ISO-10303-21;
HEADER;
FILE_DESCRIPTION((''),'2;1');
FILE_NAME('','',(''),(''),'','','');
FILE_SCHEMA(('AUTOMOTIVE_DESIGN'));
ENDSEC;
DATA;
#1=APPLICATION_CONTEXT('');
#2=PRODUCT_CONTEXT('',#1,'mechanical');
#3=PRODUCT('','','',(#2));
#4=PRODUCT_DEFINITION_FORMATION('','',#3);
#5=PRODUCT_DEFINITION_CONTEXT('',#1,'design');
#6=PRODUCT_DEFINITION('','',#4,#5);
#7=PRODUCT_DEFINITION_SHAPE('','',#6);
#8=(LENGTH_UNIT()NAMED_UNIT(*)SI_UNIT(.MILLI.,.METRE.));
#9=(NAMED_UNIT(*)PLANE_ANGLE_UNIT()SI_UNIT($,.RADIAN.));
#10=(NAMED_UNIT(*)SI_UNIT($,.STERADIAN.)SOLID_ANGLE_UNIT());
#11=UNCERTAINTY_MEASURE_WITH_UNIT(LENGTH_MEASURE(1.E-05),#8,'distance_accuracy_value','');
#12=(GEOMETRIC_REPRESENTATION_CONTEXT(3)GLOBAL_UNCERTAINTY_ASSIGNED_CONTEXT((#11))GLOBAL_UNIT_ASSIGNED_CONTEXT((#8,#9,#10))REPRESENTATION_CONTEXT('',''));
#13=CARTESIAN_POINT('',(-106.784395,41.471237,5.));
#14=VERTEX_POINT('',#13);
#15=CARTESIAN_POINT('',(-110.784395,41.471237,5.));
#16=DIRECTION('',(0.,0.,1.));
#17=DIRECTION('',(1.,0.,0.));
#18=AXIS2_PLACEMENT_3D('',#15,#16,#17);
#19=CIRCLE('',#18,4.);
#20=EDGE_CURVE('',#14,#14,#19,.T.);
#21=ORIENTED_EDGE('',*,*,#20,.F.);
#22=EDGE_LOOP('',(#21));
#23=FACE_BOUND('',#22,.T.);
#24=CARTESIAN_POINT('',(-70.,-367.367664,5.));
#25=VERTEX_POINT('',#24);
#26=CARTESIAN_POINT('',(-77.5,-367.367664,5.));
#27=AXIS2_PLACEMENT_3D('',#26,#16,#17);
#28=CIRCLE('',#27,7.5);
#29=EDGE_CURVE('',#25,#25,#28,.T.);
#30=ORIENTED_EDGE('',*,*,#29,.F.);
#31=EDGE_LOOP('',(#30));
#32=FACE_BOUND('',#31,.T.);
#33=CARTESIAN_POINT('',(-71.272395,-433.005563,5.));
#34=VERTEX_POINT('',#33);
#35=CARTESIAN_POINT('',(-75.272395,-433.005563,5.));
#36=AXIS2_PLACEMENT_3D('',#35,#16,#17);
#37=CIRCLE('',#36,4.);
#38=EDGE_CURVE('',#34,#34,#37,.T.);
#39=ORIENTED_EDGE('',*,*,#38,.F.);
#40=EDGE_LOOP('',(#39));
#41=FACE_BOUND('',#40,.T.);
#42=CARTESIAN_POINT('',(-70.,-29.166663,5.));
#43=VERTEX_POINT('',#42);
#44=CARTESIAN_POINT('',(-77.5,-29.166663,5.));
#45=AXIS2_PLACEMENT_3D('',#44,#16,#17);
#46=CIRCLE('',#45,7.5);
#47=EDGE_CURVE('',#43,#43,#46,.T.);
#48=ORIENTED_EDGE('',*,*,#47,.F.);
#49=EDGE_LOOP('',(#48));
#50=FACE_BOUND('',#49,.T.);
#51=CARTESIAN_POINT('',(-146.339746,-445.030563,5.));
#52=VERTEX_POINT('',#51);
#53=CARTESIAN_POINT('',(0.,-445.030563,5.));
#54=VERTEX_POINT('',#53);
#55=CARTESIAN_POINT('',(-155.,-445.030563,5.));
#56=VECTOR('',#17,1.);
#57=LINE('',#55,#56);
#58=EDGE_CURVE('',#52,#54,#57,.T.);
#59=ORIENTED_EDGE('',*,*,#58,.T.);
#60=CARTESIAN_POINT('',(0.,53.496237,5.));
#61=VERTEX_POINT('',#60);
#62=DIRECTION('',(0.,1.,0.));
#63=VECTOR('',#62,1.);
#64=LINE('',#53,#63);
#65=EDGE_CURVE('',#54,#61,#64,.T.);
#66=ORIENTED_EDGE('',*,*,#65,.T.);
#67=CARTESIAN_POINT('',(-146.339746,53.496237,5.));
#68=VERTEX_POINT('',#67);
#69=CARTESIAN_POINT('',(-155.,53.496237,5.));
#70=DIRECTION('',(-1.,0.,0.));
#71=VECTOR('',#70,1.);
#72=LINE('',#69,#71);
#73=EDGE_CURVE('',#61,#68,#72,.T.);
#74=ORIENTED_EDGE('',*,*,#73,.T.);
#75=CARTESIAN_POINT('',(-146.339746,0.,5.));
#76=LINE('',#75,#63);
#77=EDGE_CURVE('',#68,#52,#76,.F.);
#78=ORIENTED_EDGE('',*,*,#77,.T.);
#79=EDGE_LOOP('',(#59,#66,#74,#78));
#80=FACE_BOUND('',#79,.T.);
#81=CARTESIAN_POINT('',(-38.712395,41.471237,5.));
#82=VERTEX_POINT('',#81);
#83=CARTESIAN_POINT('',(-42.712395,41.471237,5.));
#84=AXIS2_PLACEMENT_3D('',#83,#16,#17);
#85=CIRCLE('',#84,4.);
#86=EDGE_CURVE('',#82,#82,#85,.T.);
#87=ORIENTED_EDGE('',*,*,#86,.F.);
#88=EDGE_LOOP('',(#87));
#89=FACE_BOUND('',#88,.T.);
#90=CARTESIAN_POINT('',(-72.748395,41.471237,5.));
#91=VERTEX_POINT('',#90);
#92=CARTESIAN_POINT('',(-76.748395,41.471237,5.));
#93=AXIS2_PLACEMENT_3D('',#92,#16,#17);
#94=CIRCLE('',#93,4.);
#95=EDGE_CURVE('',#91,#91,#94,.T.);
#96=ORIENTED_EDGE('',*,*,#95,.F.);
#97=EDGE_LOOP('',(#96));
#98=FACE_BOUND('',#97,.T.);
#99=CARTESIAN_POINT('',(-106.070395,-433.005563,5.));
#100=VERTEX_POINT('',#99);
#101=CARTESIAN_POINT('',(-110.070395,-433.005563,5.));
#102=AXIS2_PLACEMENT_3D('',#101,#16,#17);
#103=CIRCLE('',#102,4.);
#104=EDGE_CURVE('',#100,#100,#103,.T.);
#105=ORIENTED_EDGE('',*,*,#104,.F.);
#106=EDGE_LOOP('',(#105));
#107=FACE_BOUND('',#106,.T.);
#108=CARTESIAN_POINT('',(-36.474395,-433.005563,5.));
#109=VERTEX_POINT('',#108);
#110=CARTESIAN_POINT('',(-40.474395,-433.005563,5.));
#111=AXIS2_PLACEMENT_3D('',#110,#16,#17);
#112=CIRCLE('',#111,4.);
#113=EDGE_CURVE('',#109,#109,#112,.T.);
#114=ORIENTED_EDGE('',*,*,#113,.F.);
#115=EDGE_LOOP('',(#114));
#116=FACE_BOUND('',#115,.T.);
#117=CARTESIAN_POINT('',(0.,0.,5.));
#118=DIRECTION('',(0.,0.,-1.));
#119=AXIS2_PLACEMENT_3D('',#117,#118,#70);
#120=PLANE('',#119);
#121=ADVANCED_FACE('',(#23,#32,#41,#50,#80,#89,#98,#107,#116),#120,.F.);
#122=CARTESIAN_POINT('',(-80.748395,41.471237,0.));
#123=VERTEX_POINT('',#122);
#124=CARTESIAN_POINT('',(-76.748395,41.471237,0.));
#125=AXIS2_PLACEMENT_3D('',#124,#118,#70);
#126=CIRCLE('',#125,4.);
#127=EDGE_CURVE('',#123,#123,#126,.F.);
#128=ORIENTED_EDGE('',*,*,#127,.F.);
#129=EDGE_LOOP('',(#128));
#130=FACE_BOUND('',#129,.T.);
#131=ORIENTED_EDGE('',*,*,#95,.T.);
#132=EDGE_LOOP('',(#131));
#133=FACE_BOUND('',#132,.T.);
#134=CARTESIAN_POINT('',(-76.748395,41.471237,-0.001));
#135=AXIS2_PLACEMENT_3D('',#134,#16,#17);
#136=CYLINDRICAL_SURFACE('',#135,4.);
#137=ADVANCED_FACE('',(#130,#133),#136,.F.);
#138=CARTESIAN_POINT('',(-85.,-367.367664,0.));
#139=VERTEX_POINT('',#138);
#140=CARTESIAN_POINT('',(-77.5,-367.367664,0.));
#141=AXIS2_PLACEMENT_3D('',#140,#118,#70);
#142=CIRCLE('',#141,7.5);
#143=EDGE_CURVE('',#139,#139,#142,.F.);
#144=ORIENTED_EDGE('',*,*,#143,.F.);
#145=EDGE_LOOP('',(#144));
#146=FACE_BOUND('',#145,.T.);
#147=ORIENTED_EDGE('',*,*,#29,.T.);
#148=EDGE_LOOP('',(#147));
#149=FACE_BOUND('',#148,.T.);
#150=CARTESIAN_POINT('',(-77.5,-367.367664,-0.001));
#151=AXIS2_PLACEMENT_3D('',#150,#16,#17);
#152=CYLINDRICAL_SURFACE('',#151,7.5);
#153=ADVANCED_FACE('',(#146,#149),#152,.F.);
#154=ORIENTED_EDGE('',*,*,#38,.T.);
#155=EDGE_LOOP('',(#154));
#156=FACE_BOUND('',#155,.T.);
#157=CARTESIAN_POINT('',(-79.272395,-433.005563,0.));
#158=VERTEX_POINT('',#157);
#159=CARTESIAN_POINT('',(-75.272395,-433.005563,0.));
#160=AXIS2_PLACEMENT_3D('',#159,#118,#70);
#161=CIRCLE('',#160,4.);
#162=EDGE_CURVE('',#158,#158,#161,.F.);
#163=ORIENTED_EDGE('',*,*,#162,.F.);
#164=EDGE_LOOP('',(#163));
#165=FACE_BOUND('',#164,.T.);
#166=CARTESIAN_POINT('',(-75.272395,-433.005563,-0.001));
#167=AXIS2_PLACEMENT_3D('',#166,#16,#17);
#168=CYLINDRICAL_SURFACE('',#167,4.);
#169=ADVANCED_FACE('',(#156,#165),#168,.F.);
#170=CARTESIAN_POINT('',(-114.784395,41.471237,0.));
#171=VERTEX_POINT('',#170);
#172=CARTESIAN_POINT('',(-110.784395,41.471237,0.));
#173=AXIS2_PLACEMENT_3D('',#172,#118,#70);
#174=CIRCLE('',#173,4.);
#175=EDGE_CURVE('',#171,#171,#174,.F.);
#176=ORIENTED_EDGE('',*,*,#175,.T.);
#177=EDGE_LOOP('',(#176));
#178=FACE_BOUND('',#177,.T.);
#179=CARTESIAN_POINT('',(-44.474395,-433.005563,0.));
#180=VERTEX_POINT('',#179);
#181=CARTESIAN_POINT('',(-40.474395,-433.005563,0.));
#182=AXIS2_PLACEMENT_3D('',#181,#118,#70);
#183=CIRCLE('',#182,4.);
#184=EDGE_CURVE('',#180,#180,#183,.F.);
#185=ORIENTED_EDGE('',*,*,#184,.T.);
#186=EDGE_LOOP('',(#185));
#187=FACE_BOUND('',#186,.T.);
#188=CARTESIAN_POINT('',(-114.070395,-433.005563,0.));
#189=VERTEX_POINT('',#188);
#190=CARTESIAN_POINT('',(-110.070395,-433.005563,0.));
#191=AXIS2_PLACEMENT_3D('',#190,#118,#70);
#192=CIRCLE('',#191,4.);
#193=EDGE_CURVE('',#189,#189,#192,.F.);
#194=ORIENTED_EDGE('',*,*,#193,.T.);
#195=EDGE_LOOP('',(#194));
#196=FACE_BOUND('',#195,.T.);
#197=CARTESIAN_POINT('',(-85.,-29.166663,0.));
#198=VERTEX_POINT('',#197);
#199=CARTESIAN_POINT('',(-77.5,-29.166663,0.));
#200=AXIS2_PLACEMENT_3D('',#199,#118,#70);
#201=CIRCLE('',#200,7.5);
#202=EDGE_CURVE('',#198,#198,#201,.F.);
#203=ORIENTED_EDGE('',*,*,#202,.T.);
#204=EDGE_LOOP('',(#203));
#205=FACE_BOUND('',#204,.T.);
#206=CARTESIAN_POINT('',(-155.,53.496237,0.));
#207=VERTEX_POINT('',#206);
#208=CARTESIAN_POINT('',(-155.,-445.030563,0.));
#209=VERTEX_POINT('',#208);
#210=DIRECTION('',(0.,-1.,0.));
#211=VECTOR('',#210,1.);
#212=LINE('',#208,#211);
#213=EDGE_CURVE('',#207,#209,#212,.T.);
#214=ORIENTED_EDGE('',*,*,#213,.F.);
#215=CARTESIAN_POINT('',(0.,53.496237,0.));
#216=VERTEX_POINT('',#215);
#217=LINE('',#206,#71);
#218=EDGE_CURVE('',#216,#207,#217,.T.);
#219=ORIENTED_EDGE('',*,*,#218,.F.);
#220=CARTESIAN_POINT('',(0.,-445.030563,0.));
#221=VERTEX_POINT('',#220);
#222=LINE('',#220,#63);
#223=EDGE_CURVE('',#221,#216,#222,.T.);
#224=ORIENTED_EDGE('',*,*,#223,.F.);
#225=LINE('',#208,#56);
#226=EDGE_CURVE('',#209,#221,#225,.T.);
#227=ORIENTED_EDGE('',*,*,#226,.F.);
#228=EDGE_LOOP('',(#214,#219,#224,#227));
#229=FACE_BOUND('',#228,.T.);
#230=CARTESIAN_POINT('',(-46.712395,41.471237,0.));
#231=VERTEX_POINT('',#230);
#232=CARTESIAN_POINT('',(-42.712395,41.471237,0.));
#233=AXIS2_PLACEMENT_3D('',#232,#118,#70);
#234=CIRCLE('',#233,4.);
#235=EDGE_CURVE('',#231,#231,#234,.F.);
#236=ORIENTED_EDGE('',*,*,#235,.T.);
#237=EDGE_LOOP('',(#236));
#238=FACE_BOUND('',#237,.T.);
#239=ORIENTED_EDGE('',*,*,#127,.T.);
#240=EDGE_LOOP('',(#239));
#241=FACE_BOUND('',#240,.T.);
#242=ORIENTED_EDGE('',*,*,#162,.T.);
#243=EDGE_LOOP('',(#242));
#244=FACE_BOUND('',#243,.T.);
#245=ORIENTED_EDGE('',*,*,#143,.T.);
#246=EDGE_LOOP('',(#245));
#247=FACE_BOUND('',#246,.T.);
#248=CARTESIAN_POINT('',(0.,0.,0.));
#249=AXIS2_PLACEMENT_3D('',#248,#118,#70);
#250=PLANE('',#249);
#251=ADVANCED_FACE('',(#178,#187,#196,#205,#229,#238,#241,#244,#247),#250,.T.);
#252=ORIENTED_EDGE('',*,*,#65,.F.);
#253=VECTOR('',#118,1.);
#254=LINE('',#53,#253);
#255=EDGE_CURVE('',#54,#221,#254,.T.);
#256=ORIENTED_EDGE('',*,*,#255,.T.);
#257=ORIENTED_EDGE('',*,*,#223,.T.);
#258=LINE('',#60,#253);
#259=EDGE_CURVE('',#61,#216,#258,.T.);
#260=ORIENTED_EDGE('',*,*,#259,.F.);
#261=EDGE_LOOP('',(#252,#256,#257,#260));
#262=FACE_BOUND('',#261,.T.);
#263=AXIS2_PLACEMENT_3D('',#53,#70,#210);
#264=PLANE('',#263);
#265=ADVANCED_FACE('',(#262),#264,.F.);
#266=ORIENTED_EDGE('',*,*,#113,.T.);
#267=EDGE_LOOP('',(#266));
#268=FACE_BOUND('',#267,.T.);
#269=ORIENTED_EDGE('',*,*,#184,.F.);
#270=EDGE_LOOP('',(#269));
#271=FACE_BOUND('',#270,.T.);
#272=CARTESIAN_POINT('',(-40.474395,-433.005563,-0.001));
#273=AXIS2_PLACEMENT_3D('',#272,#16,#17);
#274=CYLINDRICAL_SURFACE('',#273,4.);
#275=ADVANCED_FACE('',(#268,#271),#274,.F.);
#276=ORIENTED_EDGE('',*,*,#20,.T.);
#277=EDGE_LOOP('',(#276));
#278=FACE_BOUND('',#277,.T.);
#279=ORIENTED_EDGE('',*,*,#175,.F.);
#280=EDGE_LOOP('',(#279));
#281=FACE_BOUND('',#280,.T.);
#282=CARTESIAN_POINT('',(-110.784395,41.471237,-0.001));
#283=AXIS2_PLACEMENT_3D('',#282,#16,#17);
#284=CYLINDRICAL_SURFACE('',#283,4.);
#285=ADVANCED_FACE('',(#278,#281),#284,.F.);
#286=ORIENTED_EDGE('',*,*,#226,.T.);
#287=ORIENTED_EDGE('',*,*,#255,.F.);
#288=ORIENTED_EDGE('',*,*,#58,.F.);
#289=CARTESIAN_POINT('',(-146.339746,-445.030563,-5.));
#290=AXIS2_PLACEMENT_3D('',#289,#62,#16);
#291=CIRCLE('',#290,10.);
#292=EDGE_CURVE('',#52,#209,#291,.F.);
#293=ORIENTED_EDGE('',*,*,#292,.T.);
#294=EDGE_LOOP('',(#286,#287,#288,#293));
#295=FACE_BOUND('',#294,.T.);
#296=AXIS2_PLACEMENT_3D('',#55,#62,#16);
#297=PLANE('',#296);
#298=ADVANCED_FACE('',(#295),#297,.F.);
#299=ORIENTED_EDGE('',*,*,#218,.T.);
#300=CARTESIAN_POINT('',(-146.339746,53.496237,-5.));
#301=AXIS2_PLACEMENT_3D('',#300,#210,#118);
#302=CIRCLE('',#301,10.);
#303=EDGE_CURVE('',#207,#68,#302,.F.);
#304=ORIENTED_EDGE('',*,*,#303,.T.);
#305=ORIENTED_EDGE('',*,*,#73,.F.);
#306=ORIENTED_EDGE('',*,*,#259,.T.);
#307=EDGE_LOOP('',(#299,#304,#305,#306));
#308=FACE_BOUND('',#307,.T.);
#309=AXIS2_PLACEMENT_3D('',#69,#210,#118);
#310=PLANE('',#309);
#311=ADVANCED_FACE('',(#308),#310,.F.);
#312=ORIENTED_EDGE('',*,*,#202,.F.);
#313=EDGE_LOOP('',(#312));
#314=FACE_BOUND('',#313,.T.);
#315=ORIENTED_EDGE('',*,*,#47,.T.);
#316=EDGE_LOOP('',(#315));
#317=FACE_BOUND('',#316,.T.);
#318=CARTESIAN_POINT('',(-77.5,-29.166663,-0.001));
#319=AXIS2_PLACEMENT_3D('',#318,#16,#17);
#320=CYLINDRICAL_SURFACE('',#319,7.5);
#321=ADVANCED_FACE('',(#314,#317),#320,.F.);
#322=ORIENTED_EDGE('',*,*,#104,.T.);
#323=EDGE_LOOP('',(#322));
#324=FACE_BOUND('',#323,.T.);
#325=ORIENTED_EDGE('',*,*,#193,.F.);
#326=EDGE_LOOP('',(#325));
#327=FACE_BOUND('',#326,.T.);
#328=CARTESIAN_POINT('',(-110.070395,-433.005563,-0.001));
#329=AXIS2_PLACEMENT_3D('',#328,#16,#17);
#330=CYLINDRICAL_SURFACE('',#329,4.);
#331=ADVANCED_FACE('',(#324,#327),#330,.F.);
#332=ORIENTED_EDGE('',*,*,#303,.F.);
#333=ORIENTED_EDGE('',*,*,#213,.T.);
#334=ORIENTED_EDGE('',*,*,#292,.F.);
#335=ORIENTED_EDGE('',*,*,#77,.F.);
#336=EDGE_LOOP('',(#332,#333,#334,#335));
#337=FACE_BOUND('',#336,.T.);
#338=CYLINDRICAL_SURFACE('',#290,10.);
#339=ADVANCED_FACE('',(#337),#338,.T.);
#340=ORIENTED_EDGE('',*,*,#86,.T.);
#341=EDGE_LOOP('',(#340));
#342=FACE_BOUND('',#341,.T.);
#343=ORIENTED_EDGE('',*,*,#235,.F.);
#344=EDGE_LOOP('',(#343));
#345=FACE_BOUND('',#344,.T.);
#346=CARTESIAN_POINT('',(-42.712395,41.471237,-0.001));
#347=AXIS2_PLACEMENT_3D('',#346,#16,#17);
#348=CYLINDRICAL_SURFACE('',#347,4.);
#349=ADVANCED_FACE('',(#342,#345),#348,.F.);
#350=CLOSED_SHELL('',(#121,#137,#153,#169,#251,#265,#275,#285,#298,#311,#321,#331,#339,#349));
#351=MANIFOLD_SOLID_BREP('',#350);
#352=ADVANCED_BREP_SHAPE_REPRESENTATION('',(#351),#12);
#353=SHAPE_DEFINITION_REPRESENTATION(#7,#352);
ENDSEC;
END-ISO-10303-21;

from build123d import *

# Parameters (mm, degrees)
SKETCH1_W          = 155
SKETCH1_H          = 498.5268
BASE_FLANGE1_DEPTH = 5
CUT_EXTRUDE2_REACH = 473.277
SKETCH6_R          = 7.5
CUT_EXTRUDE3_REACH = 473.277
SKETCH7_R          = 4
FILLET1_R          = 10


# Sheet-metal steps are written as plain solids
with BuildPart() as part:
    # Sketch1 → Base-Flange1 (new body)
    with BuildSketch(Plane.XY):
        with Locations((-77.5, -195.767163373)):
            Rectangle(SKETCH1_W, SKETCH1_H)
    extrude(amount=BASE_FLANGE1_DEPTH)

    # Sketch6 → Cut-Extrude2 (cut, up to next)
    with BuildSketch(Plane.XY.offset(5), mode=Mode.PRIVATE) as cut_extrude2_sk1:
        with Locations((-77.5, -367.367664241)):
            Circle(SKETCH6_R)
    cut_extrude2_tool1 = extrude(cut_extrude2_sk1.sketch, amount=-CUT_EXTRUDE2_REACH, mode=Mode.PRIVATE) & part.part
    # Sketch6 → Cut-Extrude2 (cut, up to next)
    with BuildSketch(Plane.XY.offset(5), mode=Mode.PRIVATE) as cut_extrude2_sk2:
        with Locations((-77.5, -29.166662504)):
            Circle(SKETCH6_R)
    cut_extrude2_tool2 = extrude(cut_extrude2_sk2.sketch, amount=-CUT_EXTRUDE2_REACH, mode=Mode.PRIVATE) & part.part
    add(cut_extrude2_tool1.solids().sort_by_distance((-77.5, -367.367664, 5))[0], mode=Mode.SUBTRACT)
    add(cut_extrude2_tool2.solids().sort_by_distance((-77.5, -29.166663, 5))[0], mode=Mode.SUBTRACT)

    # Sketch7 → Cut-Extrude3 (cut, up to next)
    with BuildSketch(Plane.XY.offset(5), mode=Mode.PRIVATE) as cut_extrude3_sk1:
        with Locations((-110.070394878, -433.005563373)):
            Circle(SKETCH7_R)
    cut_extrude3_tool1 = extrude(cut_extrude3_sk1.sketch, amount=-CUT_EXTRUDE3_REACH, mode=Mode.PRIVATE) & part.part
    # Sketch7 → Cut-Extrude3 (cut, up to next)
    with BuildSketch(Plane.XY.offset(5), mode=Mode.PRIVATE) as cut_extrude3_sk2:
        with Locations((-75.272394878, -433.005563373)):
            Circle(SKETCH7_R)
    cut_extrude3_tool2 = extrude(cut_extrude3_sk2.sketch, amount=-CUT_EXTRUDE3_REACH, mode=Mode.PRIVATE) & part.part
    # Sketch7 → Cut-Extrude3 (cut, up to next)
    with BuildSketch(Plane.XY.offset(5), mode=Mode.PRIVATE) as cut_extrude3_sk3:
        with Locations((-40.474394878, -433.005563373)):
            Circle(SKETCH7_R)
    cut_extrude3_tool3 = extrude(cut_extrude3_sk3.sketch, amount=-CUT_EXTRUDE3_REACH, mode=Mode.PRIVATE) & part.part
    # Sketch7 → Cut-Extrude3 (cut, up to next)
    with BuildSketch(Plane.XY.offset(5), mode=Mode.PRIVATE) as cut_extrude3_sk4:
        with Locations((-42.712394878, 41.471236627)):
            Circle(SKETCH7_R)
    cut_extrude3_tool4 = extrude(cut_extrude3_sk4.sketch, amount=-CUT_EXTRUDE3_REACH, mode=Mode.PRIVATE) & part.part
    # Sketch7 → Cut-Extrude3 (cut, up to next)
    with BuildSketch(Plane.XY.offset(5), mode=Mode.PRIVATE) as cut_extrude3_sk5:
        with Locations((-76.748394878, 41.471236627)):
            Circle(SKETCH7_R)
    cut_extrude3_tool5 = extrude(cut_extrude3_sk5.sketch, amount=-CUT_EXTRUDE3_REACH, mode=Mode.PRIVATE) & part.part
    # Sketch7 → Cut-Extrude3 (cut, up to next)
    with BuildSketch(Plane.XY.offset(5), mode=Mode.PRIVATE) as cut_extrude3_sk6:
        with Locations((-110.784394878, 41.471236627)):
            Circle(SKETCH7_R)
    cut_extrude3_tool6 = extrude(cut_extrude3_sk6.sketch, amount=-CUT_EXTRUDE3_REACH, mode=Mode.PRIVATE) & part.part
    add(cut_extrude3_tool1.solids().sort_by_distance((-110.070395, -433.005563, 5))[0], mode=Mode.SUBTRACT)
    add(cut_extrude3_tool2.solids().sort_by_distance((-75.272395, -433.005563, 5))[0], mode=Mode.SUBTRACT)
    add(cut_extrude3_tool3.solids().sort_by_distance((-40.474395, -433.005563, 5))[0], mode=Mode.SUBTRACT)
    add(cut_extrude3_tool4.solids().sort_by_distance((-42.712395, 41.471237, 5))[0], mode=Mode.SUBTRACT)
    add(cut_extrude3_tool5.solids().sort_by_distance((-76.748395, 41.471237, 5))[0], mode=Mode.SUBTRACT)
    add(cut_extrude3_tool6.solids().sort_by_distance((-110.784395, 41.471237, 5))[0], mode=Mode.SUBTRACT)

    # Fillet1
    # the kernel refuses this fillet: 10 mm, written as the material it takes off along each edge
    with BuildSketch(Plane(origin=(-155, 75.146871722, 5), x_dir=(0, 0, -1), z_dir=(0, -1, 0))) as fillet1_piece_1:
        with BuildLine():
            CenterArc((10, 8.660254038), FILLET1_R, 180, 60)
            Line((0, 8.660254038), (-0.2, 8.660254038))
            Line((-0.2, 8.660254038), (-0.2, 0))
            Line((-0.2, 0), (0, -0.2))
            ThreePointArc((0, -0.2), (2.5, -0.2), (4.9, -0.173205081))
            Line((4.9, -0.173205081), (5, 0))
        make_face()
    extrude(amount=541.828070189, mode=Mode.SUBTRACT)


solid = part.part
